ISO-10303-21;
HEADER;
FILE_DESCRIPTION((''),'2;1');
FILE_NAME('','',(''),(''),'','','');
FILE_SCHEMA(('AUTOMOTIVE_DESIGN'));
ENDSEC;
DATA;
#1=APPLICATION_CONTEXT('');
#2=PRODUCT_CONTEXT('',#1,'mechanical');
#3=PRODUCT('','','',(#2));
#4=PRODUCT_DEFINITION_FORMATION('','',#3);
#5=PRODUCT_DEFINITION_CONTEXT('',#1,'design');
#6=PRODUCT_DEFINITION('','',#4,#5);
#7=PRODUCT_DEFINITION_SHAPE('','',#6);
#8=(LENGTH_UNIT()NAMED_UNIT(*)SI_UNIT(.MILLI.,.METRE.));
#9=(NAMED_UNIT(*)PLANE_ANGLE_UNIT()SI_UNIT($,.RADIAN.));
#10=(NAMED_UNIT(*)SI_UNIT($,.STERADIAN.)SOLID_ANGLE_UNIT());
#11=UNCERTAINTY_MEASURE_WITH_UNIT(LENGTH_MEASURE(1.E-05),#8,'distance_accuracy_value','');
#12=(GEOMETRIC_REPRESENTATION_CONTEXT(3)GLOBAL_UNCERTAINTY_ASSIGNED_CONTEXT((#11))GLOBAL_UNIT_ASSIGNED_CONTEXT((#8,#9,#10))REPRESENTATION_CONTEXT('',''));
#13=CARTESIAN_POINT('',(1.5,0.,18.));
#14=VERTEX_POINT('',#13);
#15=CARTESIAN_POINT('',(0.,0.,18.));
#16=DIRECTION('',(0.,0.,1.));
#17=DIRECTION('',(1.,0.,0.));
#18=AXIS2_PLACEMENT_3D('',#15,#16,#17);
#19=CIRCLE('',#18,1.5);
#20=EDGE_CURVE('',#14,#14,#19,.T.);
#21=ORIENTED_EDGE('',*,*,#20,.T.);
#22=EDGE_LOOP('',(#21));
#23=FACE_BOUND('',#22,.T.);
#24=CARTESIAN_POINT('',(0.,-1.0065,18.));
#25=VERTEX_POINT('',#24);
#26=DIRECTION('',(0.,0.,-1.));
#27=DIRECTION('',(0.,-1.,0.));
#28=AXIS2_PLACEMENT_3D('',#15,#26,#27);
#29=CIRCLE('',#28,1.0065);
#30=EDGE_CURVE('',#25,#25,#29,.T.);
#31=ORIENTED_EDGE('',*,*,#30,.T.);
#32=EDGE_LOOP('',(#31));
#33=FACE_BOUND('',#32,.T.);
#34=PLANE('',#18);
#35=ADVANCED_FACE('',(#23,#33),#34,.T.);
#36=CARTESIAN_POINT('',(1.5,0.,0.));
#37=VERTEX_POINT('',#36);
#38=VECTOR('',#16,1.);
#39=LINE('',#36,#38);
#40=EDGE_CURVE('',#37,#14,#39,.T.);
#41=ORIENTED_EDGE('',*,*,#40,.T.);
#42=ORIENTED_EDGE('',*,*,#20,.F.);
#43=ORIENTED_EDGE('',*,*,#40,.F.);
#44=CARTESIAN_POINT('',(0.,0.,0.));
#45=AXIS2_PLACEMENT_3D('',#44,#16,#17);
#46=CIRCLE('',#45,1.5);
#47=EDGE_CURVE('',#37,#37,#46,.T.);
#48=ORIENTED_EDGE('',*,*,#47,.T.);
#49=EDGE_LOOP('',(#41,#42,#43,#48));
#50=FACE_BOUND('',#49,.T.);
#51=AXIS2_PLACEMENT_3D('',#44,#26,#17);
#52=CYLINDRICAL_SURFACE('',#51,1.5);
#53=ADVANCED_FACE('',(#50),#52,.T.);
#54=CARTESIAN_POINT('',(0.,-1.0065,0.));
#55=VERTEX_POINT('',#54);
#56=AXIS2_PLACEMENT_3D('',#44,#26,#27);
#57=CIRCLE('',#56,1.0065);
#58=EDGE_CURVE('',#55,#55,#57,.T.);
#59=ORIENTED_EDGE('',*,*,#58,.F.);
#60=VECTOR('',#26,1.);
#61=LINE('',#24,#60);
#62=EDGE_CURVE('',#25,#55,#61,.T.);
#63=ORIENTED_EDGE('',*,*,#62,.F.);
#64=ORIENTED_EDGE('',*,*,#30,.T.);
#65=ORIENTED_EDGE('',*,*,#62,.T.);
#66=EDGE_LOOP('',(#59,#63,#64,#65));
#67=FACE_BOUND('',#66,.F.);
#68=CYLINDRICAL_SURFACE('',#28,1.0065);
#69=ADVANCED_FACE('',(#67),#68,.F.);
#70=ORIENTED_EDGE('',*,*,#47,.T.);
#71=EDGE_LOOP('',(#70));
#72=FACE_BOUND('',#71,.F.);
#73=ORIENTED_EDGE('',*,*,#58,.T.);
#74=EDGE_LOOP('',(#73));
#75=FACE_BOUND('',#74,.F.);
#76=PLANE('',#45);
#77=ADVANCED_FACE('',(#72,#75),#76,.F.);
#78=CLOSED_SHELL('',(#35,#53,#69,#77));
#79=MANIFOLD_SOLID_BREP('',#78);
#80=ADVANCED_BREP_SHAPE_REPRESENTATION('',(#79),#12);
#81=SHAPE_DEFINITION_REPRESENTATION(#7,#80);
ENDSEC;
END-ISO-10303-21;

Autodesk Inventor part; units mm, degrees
ref_plane "YZ Plane" through (0, 0, 0) normal (1, 0, 0) x (0, 1, 0)
ref_plane "XZ Plane" through (0, 0, 0) normal (0, 1, 0) x (-1, 0, 0)
ref_plane "XY Plane" through (0, 0, 0) normal (0, 0, 1) x (1, 0, 0)
sketch "Skizze1" plane through (0, 0, 0) normal (0, 0, 1) x (1, 0, 0)
  circle A0 centre (0, 0) radius 1.5
  dimension "d0" = 3
extrude "Extrusion1" add sketch "Skizze1" along normal blind 18
sketch "Skizze2" plane through (0, 0, 18) normal (0, 0, 1) x (1, 0, 0)
  circle A0 centre (0, 0) radius 1.5 projected
hole "Bohrung1" at (0, 0, 18) direction (0, 0, -1) diameter 2.013 depth 18 thread size "M2.5x0.45" class "6H" standard "ISO Metric profile"
properties part number "Gewindehülse"
